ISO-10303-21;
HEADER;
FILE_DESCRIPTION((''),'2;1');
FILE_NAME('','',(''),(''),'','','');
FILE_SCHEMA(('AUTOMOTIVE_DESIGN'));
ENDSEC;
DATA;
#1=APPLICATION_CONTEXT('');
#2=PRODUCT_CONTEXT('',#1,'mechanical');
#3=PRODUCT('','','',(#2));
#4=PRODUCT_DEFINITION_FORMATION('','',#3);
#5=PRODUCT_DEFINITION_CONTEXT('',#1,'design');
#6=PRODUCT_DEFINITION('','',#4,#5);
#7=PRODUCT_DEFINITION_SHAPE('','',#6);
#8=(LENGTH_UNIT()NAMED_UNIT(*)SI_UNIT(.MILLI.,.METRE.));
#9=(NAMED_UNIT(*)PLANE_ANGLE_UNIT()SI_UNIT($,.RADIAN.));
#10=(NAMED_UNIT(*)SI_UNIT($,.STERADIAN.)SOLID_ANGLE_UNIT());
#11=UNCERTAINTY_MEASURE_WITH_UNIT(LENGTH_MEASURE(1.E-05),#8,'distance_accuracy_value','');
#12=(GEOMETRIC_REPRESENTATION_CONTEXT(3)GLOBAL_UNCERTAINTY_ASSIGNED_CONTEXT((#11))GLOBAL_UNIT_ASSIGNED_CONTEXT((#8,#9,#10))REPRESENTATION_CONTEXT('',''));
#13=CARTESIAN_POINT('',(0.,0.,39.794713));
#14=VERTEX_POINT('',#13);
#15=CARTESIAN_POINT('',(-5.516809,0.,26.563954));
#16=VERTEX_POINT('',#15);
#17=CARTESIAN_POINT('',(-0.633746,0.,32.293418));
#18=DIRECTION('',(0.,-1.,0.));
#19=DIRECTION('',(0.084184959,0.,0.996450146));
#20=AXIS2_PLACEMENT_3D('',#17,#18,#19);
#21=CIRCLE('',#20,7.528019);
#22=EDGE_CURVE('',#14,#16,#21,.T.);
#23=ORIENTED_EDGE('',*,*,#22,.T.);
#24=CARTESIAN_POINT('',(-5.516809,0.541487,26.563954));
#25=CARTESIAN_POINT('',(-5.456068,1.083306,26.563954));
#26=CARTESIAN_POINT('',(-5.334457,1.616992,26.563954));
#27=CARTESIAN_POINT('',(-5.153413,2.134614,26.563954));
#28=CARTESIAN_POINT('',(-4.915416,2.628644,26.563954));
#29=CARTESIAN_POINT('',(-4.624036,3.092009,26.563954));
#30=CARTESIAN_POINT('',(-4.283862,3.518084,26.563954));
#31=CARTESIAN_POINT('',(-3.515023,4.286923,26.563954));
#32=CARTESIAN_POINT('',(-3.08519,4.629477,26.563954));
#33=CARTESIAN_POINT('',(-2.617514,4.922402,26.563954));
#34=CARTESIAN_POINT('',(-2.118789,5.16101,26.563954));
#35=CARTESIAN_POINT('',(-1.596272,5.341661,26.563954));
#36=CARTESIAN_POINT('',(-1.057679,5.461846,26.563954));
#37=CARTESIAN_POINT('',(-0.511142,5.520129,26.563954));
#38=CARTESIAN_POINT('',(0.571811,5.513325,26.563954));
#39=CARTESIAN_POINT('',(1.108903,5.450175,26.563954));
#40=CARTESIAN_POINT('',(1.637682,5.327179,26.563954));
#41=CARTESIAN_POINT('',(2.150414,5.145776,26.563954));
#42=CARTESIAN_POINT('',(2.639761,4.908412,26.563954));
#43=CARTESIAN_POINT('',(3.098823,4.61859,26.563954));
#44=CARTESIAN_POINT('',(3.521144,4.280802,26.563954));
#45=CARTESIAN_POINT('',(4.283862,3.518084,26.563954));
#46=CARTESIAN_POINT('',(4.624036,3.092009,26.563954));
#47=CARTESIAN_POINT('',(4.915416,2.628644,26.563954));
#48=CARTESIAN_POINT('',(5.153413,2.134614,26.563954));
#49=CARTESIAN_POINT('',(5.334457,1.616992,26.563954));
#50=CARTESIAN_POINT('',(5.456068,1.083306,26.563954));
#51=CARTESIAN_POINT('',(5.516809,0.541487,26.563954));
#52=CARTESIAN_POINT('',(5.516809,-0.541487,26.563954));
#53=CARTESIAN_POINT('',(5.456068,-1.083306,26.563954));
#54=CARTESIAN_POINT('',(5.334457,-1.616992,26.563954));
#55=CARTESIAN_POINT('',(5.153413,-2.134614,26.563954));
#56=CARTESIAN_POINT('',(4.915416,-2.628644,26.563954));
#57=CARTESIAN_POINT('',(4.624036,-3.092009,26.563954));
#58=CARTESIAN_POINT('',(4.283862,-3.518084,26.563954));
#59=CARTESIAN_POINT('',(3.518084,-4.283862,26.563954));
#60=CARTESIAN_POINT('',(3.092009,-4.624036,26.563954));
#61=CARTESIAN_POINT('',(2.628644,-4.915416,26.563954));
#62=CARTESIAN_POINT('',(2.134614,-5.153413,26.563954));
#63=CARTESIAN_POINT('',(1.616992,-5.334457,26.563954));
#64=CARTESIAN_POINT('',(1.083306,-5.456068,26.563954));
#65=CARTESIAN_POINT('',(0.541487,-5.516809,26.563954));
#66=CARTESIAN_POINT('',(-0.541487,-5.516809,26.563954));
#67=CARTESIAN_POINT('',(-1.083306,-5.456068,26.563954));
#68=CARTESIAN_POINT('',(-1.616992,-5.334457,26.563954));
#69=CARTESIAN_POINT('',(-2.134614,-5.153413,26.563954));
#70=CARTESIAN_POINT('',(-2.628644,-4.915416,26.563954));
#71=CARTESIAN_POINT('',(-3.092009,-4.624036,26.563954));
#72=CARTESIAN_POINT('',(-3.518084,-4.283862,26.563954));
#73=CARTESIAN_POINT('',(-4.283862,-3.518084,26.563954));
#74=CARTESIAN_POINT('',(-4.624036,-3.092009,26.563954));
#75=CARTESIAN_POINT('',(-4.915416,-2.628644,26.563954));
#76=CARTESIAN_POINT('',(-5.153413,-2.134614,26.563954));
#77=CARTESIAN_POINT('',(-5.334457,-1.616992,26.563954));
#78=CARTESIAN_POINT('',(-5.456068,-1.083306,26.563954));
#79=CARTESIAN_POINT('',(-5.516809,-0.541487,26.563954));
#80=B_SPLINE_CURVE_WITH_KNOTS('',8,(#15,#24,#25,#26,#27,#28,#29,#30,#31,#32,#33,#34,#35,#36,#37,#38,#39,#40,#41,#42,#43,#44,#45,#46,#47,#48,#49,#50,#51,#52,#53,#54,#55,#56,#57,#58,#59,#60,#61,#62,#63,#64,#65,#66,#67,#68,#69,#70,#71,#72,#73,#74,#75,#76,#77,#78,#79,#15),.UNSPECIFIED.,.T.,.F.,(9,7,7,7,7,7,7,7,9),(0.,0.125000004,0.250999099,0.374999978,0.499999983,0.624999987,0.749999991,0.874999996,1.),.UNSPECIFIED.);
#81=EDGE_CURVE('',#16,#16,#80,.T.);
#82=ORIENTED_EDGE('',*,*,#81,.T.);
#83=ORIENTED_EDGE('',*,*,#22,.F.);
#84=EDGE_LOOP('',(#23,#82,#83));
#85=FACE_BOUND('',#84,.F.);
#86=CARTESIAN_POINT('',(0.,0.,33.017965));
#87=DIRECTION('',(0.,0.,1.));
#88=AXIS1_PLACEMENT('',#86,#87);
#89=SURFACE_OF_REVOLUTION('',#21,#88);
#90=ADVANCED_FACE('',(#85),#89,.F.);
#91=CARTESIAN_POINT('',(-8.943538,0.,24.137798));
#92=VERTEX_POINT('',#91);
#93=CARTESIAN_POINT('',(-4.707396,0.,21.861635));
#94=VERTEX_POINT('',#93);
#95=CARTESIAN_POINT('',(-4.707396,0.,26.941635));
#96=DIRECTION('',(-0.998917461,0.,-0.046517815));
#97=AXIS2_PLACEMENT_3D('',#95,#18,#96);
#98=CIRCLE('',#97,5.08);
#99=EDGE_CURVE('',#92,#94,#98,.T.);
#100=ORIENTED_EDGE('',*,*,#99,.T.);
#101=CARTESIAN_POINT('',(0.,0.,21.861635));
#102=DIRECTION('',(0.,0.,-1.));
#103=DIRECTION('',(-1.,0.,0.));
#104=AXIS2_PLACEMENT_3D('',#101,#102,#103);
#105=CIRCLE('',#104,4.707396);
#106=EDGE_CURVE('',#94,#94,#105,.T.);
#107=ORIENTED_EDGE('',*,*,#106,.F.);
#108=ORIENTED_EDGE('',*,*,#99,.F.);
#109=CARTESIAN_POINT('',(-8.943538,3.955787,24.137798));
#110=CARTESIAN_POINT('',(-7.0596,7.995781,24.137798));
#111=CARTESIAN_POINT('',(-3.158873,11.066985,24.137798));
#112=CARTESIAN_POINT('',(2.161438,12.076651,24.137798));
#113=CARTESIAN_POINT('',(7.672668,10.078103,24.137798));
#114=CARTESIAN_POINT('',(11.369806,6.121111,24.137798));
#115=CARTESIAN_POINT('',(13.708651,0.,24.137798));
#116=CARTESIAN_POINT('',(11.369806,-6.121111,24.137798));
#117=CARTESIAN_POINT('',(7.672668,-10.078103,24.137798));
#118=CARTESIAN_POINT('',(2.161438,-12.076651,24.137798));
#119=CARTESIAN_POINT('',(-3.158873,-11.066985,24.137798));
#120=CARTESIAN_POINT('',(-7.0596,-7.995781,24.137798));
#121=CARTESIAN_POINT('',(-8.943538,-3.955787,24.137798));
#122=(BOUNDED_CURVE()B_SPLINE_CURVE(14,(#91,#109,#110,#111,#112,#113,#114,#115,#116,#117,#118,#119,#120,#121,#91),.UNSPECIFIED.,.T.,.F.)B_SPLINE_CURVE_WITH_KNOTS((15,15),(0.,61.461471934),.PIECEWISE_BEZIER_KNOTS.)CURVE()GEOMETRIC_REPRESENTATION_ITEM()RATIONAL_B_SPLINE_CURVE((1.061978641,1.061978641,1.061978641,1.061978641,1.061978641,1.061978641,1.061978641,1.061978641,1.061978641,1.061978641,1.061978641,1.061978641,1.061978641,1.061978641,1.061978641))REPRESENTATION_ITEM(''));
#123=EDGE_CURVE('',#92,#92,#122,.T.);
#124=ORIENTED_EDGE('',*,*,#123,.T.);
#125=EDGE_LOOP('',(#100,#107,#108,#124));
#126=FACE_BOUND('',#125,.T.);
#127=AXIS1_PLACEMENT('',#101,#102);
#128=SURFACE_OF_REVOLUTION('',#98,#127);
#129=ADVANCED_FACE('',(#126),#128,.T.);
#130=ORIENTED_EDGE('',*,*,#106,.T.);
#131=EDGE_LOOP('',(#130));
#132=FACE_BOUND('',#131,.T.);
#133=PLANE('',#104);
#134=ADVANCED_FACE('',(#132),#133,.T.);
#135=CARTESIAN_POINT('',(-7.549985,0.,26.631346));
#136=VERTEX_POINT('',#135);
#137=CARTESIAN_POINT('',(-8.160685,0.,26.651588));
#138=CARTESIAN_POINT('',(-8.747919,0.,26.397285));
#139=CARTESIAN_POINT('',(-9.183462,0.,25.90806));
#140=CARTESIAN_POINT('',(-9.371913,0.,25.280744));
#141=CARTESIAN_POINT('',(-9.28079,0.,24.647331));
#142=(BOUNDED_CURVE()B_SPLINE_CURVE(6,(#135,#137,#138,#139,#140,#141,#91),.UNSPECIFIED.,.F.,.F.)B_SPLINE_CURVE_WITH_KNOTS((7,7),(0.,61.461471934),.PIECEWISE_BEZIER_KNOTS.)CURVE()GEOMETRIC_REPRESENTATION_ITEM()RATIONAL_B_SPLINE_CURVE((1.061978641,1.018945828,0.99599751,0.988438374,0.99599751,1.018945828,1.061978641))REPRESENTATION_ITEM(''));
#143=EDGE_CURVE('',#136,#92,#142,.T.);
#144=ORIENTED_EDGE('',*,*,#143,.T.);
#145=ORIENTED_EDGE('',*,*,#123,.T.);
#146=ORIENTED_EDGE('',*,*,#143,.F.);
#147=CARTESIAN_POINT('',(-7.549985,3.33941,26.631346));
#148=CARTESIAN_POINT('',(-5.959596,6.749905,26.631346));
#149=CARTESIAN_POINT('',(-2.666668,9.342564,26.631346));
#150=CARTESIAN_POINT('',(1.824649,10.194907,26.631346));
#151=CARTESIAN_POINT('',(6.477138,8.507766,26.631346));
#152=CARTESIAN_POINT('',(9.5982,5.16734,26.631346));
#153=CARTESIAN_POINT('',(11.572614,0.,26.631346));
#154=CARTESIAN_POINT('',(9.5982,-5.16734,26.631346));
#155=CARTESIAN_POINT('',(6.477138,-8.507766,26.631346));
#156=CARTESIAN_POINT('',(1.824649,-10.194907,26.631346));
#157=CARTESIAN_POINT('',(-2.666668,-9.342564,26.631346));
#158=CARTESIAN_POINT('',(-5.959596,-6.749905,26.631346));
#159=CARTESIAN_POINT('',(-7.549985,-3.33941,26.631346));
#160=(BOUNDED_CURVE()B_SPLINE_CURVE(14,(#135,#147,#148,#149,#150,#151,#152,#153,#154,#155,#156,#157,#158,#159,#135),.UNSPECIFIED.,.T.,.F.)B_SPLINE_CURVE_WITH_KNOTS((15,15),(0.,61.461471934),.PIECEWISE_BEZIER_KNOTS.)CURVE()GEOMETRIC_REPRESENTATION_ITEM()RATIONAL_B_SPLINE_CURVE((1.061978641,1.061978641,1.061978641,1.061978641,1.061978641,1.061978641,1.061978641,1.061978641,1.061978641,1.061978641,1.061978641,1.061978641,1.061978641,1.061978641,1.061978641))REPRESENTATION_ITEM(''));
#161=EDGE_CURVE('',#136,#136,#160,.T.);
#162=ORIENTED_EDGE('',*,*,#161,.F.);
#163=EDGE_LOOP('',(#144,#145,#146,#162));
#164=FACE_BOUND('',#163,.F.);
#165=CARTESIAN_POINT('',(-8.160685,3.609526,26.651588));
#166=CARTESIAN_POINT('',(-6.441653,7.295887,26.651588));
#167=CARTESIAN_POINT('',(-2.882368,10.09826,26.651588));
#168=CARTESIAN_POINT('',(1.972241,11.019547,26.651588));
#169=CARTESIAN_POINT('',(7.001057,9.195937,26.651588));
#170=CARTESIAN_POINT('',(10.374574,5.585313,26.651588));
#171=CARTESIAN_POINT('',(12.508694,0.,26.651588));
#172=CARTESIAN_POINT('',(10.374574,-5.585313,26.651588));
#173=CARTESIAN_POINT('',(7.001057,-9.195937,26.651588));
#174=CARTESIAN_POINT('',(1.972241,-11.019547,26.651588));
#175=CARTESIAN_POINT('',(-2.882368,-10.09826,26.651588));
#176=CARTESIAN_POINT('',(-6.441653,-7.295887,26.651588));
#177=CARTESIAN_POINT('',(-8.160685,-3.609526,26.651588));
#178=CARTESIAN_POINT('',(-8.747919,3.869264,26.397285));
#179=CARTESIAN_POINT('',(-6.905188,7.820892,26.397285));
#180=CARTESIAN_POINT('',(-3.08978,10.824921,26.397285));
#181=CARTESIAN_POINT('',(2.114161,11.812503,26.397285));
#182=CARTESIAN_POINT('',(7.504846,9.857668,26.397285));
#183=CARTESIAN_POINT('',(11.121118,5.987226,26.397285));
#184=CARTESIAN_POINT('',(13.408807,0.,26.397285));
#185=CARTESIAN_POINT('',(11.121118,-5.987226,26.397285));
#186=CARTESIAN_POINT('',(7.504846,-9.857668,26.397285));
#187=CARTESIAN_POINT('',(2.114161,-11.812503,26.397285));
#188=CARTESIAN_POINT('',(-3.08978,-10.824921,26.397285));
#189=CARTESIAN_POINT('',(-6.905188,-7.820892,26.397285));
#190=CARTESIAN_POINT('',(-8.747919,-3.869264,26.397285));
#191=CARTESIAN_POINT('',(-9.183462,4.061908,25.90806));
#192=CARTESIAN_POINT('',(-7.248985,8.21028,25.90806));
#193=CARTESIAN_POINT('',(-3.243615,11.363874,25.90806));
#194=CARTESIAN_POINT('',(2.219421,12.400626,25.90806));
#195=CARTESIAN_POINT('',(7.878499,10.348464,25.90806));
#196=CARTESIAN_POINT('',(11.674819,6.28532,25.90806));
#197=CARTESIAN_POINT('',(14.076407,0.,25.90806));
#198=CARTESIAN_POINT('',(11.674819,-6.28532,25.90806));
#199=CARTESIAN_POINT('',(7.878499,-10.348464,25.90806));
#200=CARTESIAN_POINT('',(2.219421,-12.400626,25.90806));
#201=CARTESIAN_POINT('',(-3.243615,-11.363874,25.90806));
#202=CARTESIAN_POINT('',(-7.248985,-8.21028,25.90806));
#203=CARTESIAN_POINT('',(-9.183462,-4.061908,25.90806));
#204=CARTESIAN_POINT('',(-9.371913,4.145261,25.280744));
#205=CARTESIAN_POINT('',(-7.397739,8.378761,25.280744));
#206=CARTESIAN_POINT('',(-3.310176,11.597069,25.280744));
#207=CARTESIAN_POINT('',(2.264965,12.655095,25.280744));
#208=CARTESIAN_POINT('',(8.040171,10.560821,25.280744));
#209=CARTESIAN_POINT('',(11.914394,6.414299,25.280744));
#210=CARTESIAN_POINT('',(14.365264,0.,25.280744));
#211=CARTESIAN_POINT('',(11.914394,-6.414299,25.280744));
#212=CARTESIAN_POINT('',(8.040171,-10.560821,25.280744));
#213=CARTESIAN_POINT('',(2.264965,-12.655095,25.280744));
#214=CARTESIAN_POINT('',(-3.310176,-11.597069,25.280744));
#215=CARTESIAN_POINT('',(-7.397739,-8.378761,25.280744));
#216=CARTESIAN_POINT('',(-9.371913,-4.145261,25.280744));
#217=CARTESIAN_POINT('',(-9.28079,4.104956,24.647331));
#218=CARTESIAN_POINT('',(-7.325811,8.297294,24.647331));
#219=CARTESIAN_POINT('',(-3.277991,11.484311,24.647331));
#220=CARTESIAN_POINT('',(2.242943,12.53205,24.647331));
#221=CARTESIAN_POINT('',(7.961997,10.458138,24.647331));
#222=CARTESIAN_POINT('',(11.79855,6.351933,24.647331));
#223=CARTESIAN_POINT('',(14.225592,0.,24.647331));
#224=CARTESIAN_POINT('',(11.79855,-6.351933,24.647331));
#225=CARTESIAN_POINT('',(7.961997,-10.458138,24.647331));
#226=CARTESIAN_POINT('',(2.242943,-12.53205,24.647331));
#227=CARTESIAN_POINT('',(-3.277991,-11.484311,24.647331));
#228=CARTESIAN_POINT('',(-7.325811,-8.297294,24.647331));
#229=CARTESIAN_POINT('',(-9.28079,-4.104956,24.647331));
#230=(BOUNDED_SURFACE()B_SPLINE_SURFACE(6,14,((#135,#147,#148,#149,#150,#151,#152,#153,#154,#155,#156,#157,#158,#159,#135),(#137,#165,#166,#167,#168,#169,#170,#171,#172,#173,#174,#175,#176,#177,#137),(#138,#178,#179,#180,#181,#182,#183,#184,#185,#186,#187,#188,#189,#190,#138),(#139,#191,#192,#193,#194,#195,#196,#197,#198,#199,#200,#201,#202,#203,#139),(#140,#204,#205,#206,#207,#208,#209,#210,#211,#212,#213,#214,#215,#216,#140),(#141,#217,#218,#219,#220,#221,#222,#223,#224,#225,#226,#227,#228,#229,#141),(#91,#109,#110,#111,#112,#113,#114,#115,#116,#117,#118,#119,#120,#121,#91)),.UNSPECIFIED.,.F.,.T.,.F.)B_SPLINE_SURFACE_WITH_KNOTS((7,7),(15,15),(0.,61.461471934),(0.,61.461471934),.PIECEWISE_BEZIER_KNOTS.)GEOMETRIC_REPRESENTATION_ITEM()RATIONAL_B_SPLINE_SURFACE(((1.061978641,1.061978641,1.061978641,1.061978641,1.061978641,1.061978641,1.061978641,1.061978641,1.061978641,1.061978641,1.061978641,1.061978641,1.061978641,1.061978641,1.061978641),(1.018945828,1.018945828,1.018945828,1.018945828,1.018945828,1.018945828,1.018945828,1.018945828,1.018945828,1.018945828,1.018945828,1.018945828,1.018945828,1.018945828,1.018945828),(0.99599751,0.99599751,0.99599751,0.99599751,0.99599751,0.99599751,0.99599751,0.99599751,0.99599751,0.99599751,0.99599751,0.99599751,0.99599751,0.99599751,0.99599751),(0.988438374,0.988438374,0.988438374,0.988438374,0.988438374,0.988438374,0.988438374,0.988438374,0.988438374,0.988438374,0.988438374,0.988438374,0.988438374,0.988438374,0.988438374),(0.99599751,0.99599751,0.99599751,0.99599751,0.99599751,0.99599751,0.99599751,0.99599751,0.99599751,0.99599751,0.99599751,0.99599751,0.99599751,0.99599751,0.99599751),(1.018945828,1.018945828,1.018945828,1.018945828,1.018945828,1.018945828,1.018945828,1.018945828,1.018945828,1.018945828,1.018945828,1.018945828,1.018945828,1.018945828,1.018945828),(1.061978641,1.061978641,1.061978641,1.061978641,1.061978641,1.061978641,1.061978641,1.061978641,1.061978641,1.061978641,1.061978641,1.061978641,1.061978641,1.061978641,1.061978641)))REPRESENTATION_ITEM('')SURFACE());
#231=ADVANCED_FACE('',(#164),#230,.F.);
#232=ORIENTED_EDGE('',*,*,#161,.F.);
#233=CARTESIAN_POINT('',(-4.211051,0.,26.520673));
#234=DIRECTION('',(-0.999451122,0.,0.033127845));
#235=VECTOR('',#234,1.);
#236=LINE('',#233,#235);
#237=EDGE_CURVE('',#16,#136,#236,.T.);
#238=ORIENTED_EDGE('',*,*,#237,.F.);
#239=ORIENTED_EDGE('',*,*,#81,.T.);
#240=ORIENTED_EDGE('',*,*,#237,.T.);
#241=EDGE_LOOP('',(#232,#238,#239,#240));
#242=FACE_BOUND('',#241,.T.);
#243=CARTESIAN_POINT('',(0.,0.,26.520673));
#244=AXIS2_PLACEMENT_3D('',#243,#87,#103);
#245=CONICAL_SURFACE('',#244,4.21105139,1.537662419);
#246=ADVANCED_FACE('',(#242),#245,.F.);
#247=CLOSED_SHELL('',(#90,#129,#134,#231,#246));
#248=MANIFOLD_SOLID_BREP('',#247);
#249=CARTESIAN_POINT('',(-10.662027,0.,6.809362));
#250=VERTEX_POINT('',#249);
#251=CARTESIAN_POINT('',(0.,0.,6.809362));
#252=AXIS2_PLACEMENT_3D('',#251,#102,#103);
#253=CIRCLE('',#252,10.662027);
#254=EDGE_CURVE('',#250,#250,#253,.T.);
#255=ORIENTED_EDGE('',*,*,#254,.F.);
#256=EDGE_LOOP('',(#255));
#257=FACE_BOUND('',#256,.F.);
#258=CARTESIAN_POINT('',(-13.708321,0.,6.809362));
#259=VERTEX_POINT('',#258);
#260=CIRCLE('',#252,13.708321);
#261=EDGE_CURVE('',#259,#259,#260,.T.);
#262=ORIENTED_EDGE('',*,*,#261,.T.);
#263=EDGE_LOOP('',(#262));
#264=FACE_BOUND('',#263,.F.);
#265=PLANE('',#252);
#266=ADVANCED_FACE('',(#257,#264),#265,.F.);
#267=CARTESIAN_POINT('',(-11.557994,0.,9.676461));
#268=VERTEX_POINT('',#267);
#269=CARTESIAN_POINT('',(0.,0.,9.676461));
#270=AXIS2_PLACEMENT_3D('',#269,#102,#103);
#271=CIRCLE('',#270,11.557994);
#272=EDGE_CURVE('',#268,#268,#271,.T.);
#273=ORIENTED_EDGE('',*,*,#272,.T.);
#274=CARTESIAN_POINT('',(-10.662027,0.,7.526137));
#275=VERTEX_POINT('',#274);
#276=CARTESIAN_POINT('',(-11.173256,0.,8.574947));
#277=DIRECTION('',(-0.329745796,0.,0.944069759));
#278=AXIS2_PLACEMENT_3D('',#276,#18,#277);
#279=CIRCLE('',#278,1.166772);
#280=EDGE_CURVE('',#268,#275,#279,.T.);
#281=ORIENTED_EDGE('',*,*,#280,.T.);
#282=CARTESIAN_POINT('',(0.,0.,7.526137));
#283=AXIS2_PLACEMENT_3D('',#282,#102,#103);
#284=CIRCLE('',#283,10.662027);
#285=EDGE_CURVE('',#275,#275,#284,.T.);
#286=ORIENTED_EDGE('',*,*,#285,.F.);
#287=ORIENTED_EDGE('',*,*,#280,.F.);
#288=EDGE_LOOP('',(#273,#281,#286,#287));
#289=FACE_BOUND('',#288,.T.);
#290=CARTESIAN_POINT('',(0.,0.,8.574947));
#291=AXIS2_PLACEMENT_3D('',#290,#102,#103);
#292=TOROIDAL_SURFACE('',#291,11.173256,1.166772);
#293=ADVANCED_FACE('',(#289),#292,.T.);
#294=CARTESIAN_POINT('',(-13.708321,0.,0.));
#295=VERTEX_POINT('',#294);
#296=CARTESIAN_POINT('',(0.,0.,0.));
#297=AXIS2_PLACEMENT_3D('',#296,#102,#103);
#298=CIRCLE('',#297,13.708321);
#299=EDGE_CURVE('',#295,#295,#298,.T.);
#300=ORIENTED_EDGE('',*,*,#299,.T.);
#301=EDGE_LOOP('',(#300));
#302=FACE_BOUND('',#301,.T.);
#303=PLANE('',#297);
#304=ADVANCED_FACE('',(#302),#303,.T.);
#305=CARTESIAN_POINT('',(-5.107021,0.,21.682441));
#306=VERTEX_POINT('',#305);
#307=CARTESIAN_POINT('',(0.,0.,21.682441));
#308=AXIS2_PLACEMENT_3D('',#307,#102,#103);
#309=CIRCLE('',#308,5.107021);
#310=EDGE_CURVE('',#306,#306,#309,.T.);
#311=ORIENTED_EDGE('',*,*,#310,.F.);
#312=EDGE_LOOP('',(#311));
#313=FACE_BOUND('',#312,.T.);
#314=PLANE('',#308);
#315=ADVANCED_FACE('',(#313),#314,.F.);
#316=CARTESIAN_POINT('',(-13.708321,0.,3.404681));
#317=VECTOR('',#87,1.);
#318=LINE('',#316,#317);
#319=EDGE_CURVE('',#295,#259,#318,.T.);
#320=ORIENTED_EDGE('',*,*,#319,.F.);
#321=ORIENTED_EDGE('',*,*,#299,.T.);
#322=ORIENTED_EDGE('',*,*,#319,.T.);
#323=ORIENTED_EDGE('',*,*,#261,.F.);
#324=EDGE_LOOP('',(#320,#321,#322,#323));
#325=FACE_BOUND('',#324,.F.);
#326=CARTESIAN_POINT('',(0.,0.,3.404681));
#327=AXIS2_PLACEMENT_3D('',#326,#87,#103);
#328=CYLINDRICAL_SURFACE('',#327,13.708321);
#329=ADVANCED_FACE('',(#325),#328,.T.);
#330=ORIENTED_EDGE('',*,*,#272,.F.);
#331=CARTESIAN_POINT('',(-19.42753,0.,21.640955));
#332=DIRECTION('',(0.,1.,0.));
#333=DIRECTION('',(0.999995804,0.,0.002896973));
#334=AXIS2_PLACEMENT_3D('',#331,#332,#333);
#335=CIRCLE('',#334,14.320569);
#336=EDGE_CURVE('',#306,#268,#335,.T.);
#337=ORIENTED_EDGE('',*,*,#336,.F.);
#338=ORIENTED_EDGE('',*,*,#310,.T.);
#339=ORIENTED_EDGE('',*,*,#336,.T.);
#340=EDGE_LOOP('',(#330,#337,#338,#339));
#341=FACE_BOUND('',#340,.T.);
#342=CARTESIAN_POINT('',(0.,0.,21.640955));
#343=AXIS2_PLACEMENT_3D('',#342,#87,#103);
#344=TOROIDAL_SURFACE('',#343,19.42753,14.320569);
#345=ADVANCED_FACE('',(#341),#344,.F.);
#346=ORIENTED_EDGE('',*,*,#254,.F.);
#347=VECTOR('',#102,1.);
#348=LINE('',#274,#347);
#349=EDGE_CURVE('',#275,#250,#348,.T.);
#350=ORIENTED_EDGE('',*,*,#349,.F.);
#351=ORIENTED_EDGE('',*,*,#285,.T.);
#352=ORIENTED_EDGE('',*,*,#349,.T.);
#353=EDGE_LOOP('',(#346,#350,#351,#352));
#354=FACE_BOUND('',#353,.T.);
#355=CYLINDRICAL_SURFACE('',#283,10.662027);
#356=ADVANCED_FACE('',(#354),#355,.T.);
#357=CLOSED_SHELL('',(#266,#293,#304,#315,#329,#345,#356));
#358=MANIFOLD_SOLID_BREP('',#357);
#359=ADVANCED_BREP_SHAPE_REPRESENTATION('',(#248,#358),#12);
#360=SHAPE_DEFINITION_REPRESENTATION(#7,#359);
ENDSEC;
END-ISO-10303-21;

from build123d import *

# Parameters (mm, degrees)
F0_W = 13.7083213776
F0_H = 6.8093617447
F9_R = 1.6073014862


# Not quite as in the source:
# - a fillet or chamfer that OpenCascade refuses, or shapes differently, is made with other operations: its cross-section is extruded or revolved along the edge and cut away or added


with BuildPart() as f1:
    # F0 (on Front) → F1 (revolve)
    with BuildSketch(Plane.XZ):
        with Locations((-6.8541606888, 3.4046808723)):
            Rectangle(F0_W, F0_H)
    revolve(axis=Axis((0, 0, 3.4046808723), (0, 0, -1)))

    # F2 (on Front) → F3 (revolve)
    with BuildSketch(Plane.XZ):
        with BuildLine():
            ThreePointArc((-5.1070209593, 21.6824412346), (-6.8126416021, 14.8628068286), (-11.5579944104, 9.676461108))
            ThreePointArc((-11.5579944104, 9.676461108), (-12.2502768318, 8.1261884439), (-10.6620267034, 7.5261369348))
            Line((-10.6620267034, 7.5261369348), (-10.6620267034, 6.6301682964))
            Line((-10.6620267034, 6.6301682964), (0, 6.6301682964))
            Line((0, 6.6301682964), (0, 21.6824412346))
            Line((0, 21.6824412346), (-5.1070209593, 21.6824412346))
        make_face()
    revolve(axis=Axis((0, 0, 14.1563047655), (0, 0, -1)))


with BuildPart() as f5:
    # F4 (on Front) → F5 (revolve)
    with BuildSketch(Plane.XZ):
        Polygon((-9.781897068, 21.8616351485), (-4.748633597, 21.8616351485), (0, 21.8616351485), (0, 26.5206731856), (-4.2110513896, 26.5206731856), (-9.781897068, 26.7053246498), align=None)
    revolve(axis=Axis((0, 0, 24.1911541671), (0, 0, -1)))

    # F6 (on Front) → F7 (revolve)
    with BuildSketch(Plane.XZ):
        with BuildLine():
            Line((0, 26.2412168086), (0, 39.7947132587))
            ThreePointArc((0, 39.7947132587), (-7.6776526733, 34.9494378225), (-5.1105665043, 26.2412168086))
            Line((-5.1105665043, 26.2412168086), (0, 26.2412168086))
        make_face()
    revolve(axis=Axis((0, 0, 33.0179650337), (0, 0, 1)))

    # F8: fillet of radius 5.08 on 1 edges, made by hand

    # F8_s1 → F8_t2 (revolve, cut)
    with BuildSketch(Plane.XZ):
        with BuildLine():
            ThreePointArc((-9.781897068, 26.7053246498), (-8.2149555389, 23.2669339815), (-4.7073963686, 21.8616351485))
            Line((-4.7073963686, 21.8616351485), (-9.781897068, 21.8616351485))
            Line((-9.781897068, 21.8616351485), (-9.781897068, 26.7053246498))
        make_face()
    revolve(axis=Axis((0, 0, 21.8616351485), (0, 0, -1)), mode=Mode.SUBTRACT)

    # F9
    f9_edges = [f5.edges().sort_by_distance(p)[0] for p in [
        (9.781897, 0, 26.705325),
    ]]
    fillet(f9_edges, radius=F9_R)


solid = Compound([f1.part, f5.part])
